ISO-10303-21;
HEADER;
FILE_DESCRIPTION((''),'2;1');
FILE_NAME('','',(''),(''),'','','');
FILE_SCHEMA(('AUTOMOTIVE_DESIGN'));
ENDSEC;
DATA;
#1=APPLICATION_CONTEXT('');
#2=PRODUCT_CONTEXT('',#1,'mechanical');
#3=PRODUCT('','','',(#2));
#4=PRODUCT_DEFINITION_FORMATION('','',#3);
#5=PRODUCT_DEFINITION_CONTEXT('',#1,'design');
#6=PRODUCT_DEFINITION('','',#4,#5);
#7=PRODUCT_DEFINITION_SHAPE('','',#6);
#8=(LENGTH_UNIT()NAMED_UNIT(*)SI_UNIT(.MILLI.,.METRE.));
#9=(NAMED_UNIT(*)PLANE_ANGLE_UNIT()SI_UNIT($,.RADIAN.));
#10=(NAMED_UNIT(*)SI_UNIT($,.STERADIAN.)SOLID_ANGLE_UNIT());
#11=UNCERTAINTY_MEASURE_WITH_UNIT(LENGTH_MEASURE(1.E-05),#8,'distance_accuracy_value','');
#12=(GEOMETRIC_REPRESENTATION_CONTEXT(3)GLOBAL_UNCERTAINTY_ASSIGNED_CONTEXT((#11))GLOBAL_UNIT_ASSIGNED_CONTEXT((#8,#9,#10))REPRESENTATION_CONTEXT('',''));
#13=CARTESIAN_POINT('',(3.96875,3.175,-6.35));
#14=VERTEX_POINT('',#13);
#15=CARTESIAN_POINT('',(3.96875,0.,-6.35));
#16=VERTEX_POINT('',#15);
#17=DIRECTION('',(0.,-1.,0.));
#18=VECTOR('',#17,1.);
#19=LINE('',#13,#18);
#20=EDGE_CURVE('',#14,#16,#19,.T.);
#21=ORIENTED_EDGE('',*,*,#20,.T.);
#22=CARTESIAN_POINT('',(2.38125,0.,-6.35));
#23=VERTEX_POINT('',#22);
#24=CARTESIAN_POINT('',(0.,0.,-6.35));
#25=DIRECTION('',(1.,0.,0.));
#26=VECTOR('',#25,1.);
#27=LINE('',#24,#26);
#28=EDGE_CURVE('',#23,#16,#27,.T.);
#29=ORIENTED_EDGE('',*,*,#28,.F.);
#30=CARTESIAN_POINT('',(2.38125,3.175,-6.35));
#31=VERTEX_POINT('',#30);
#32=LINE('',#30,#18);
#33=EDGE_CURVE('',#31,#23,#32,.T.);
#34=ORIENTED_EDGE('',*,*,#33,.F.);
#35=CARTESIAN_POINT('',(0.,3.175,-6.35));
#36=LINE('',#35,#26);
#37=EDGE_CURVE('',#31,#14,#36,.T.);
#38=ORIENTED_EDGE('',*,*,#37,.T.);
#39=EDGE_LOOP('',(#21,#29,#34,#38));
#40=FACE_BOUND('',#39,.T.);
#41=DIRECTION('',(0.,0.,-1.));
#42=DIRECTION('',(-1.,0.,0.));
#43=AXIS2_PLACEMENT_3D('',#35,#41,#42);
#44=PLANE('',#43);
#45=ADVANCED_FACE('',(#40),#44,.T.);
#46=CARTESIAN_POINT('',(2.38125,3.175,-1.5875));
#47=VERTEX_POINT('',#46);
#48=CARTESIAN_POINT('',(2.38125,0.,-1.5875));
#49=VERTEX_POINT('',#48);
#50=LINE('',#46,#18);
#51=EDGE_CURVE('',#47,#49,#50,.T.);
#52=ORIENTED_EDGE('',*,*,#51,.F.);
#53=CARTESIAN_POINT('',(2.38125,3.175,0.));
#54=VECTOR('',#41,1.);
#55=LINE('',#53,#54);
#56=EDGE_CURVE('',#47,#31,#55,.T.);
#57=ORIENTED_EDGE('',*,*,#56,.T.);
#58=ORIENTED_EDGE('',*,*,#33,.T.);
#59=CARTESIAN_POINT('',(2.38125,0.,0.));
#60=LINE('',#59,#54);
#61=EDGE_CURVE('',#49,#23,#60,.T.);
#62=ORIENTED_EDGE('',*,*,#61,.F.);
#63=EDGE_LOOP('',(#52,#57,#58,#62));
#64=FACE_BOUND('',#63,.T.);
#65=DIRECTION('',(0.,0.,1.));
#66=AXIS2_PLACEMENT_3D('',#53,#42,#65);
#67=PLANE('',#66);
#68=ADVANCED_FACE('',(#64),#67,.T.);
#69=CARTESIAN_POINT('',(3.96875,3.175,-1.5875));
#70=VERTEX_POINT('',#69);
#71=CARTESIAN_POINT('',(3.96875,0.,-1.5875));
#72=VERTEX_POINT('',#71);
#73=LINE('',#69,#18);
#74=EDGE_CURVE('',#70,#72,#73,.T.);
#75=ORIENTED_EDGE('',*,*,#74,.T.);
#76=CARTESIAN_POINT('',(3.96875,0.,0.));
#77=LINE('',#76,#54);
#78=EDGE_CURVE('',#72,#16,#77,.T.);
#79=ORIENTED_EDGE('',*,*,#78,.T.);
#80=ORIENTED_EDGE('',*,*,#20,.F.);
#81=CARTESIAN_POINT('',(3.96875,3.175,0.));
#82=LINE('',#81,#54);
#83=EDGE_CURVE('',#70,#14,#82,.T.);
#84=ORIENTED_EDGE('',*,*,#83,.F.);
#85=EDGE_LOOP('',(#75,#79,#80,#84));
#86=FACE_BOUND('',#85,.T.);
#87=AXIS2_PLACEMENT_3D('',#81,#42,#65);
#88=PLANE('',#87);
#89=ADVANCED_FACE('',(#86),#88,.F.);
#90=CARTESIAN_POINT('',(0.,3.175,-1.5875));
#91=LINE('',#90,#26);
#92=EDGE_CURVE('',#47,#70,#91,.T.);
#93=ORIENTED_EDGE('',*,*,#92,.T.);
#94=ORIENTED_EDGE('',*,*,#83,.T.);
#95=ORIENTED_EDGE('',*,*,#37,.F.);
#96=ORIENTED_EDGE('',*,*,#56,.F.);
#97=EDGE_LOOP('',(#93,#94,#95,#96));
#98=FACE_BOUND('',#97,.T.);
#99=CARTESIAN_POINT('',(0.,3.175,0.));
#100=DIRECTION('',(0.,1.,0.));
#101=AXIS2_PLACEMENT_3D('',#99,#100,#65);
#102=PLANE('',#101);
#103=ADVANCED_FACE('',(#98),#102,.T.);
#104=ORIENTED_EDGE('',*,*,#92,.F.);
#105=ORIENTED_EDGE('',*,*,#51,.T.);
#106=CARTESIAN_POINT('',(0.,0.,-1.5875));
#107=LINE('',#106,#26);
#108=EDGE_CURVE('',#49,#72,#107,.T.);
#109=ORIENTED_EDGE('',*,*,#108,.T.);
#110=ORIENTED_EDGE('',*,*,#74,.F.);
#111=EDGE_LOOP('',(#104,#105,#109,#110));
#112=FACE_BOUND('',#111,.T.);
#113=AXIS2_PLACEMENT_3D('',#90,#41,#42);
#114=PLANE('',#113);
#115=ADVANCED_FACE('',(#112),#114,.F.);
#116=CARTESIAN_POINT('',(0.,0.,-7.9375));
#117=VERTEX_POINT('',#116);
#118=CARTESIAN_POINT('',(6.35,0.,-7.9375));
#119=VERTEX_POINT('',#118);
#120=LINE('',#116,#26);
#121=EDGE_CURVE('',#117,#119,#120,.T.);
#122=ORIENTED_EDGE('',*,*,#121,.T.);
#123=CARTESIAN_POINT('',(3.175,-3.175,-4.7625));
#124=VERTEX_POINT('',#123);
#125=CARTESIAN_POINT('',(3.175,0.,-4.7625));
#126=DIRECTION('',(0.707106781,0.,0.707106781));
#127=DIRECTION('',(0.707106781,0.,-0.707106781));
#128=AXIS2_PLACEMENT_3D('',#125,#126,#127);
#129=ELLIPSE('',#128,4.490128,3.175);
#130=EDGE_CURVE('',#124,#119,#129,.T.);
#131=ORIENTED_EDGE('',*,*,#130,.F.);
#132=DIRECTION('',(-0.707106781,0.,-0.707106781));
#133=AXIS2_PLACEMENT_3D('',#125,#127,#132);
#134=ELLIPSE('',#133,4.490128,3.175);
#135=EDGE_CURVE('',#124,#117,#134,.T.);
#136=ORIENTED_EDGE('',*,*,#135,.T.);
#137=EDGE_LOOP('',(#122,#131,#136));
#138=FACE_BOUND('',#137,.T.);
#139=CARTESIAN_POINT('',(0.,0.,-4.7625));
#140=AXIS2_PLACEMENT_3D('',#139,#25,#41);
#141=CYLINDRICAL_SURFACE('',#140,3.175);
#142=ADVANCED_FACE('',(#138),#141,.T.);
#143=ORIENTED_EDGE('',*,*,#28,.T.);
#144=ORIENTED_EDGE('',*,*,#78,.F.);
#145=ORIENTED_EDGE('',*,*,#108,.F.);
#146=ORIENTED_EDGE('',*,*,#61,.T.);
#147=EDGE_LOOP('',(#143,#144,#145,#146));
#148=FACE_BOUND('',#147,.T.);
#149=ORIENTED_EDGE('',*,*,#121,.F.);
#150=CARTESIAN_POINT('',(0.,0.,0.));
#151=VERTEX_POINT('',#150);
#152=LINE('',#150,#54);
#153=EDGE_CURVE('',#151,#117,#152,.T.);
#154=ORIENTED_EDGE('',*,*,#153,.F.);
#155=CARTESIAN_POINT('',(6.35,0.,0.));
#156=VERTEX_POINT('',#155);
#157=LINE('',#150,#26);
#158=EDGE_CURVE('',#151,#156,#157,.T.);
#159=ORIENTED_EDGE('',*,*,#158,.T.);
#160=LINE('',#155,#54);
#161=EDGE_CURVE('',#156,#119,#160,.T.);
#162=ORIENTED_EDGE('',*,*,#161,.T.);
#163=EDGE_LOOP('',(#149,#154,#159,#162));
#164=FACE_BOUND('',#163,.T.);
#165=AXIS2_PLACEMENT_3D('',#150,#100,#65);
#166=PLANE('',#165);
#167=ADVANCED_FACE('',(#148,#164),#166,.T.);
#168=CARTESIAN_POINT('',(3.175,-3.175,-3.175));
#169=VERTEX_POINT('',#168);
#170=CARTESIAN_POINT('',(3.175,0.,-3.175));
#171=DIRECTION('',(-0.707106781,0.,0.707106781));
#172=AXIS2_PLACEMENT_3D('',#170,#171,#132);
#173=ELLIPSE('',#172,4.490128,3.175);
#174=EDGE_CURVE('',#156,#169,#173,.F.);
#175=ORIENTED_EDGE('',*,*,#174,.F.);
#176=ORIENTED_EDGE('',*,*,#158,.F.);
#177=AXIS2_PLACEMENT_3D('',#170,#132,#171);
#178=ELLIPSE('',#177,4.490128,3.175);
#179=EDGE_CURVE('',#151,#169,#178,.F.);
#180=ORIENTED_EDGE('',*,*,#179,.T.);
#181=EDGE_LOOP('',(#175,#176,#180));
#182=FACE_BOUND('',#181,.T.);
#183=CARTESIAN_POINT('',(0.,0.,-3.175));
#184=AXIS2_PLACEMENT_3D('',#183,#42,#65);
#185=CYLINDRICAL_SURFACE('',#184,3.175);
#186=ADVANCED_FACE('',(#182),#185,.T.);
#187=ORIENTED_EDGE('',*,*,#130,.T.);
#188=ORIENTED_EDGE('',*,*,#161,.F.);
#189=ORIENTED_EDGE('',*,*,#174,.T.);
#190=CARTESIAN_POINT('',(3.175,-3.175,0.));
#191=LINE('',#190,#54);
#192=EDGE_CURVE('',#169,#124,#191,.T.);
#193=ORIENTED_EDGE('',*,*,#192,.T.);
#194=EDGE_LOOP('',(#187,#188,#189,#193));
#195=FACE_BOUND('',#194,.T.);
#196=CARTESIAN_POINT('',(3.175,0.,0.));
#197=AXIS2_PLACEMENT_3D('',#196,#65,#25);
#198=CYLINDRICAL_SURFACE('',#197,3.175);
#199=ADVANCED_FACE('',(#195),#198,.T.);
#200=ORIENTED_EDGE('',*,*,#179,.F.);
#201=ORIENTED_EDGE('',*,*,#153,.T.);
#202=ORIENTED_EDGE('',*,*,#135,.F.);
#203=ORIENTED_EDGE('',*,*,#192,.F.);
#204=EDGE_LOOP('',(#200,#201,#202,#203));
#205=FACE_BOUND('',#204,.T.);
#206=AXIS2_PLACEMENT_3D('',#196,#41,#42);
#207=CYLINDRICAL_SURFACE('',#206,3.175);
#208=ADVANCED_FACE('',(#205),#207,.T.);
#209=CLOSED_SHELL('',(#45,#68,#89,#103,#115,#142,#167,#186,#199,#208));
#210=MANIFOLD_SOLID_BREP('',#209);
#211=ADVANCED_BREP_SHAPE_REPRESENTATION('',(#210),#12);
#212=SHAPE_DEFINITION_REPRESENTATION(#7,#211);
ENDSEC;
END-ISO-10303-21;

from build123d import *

# Parameters (mm, degrees)
SKETCH1_W           = 6.35
SKETCH1_H           = 7.9375
BOSS_EXTRUDE1_DEPTH = 3.175
SKETCH1_3_W         = 1.5875
SKETCH1_3_H         = 4.7625
BOSS_EXTRUDE2_DEPTH = 3.175
FILLET1_R           = 3.175


with BuildPart() as part:
    # Sketch1 → Boss-Extrude1 (new body)
    with BuildSketch(Plane(origin=(0, 0, 0), x_dir=(1, 0, 0), z_dir=(0, 1, 0))):
        with Locations((3.175, 3.96875)):
            Rectangle(SKETCH1_W, SKETCH1_H)
    extrude(amount=-BOSS_EXTRUDE1_DEPTH)

    # Sketch1<3> → Boss-Extrude2 (add)
    with BuildSketch(Plane(origin=(0, 0, 0), x_dir=(1, 0, 0), z_dir=(0, 1, 0))):
        with Locations((3.175, 3.96875)):
            Rectangle(SKETCH1_3_W, SKETCH1_3_H)
    extrude(amount=BOSS_EXTRUDE2_DEPTH)

    # Fillet1
    fillet1_edges = [part.edges().sort_by_distance(p)[0] for p in [
        (6.35, -3.175, -3.96875),
        (3.175, -3.175, -7.9375),
        (0, -3.175, -3.96875),
        (3.175, -3.175, 0),
    ]]
    fillet(fillet1_edges, radius=FILLET1_R - 0.0001)  # a hair under: the kernel refuses the full size


solid = part.part
